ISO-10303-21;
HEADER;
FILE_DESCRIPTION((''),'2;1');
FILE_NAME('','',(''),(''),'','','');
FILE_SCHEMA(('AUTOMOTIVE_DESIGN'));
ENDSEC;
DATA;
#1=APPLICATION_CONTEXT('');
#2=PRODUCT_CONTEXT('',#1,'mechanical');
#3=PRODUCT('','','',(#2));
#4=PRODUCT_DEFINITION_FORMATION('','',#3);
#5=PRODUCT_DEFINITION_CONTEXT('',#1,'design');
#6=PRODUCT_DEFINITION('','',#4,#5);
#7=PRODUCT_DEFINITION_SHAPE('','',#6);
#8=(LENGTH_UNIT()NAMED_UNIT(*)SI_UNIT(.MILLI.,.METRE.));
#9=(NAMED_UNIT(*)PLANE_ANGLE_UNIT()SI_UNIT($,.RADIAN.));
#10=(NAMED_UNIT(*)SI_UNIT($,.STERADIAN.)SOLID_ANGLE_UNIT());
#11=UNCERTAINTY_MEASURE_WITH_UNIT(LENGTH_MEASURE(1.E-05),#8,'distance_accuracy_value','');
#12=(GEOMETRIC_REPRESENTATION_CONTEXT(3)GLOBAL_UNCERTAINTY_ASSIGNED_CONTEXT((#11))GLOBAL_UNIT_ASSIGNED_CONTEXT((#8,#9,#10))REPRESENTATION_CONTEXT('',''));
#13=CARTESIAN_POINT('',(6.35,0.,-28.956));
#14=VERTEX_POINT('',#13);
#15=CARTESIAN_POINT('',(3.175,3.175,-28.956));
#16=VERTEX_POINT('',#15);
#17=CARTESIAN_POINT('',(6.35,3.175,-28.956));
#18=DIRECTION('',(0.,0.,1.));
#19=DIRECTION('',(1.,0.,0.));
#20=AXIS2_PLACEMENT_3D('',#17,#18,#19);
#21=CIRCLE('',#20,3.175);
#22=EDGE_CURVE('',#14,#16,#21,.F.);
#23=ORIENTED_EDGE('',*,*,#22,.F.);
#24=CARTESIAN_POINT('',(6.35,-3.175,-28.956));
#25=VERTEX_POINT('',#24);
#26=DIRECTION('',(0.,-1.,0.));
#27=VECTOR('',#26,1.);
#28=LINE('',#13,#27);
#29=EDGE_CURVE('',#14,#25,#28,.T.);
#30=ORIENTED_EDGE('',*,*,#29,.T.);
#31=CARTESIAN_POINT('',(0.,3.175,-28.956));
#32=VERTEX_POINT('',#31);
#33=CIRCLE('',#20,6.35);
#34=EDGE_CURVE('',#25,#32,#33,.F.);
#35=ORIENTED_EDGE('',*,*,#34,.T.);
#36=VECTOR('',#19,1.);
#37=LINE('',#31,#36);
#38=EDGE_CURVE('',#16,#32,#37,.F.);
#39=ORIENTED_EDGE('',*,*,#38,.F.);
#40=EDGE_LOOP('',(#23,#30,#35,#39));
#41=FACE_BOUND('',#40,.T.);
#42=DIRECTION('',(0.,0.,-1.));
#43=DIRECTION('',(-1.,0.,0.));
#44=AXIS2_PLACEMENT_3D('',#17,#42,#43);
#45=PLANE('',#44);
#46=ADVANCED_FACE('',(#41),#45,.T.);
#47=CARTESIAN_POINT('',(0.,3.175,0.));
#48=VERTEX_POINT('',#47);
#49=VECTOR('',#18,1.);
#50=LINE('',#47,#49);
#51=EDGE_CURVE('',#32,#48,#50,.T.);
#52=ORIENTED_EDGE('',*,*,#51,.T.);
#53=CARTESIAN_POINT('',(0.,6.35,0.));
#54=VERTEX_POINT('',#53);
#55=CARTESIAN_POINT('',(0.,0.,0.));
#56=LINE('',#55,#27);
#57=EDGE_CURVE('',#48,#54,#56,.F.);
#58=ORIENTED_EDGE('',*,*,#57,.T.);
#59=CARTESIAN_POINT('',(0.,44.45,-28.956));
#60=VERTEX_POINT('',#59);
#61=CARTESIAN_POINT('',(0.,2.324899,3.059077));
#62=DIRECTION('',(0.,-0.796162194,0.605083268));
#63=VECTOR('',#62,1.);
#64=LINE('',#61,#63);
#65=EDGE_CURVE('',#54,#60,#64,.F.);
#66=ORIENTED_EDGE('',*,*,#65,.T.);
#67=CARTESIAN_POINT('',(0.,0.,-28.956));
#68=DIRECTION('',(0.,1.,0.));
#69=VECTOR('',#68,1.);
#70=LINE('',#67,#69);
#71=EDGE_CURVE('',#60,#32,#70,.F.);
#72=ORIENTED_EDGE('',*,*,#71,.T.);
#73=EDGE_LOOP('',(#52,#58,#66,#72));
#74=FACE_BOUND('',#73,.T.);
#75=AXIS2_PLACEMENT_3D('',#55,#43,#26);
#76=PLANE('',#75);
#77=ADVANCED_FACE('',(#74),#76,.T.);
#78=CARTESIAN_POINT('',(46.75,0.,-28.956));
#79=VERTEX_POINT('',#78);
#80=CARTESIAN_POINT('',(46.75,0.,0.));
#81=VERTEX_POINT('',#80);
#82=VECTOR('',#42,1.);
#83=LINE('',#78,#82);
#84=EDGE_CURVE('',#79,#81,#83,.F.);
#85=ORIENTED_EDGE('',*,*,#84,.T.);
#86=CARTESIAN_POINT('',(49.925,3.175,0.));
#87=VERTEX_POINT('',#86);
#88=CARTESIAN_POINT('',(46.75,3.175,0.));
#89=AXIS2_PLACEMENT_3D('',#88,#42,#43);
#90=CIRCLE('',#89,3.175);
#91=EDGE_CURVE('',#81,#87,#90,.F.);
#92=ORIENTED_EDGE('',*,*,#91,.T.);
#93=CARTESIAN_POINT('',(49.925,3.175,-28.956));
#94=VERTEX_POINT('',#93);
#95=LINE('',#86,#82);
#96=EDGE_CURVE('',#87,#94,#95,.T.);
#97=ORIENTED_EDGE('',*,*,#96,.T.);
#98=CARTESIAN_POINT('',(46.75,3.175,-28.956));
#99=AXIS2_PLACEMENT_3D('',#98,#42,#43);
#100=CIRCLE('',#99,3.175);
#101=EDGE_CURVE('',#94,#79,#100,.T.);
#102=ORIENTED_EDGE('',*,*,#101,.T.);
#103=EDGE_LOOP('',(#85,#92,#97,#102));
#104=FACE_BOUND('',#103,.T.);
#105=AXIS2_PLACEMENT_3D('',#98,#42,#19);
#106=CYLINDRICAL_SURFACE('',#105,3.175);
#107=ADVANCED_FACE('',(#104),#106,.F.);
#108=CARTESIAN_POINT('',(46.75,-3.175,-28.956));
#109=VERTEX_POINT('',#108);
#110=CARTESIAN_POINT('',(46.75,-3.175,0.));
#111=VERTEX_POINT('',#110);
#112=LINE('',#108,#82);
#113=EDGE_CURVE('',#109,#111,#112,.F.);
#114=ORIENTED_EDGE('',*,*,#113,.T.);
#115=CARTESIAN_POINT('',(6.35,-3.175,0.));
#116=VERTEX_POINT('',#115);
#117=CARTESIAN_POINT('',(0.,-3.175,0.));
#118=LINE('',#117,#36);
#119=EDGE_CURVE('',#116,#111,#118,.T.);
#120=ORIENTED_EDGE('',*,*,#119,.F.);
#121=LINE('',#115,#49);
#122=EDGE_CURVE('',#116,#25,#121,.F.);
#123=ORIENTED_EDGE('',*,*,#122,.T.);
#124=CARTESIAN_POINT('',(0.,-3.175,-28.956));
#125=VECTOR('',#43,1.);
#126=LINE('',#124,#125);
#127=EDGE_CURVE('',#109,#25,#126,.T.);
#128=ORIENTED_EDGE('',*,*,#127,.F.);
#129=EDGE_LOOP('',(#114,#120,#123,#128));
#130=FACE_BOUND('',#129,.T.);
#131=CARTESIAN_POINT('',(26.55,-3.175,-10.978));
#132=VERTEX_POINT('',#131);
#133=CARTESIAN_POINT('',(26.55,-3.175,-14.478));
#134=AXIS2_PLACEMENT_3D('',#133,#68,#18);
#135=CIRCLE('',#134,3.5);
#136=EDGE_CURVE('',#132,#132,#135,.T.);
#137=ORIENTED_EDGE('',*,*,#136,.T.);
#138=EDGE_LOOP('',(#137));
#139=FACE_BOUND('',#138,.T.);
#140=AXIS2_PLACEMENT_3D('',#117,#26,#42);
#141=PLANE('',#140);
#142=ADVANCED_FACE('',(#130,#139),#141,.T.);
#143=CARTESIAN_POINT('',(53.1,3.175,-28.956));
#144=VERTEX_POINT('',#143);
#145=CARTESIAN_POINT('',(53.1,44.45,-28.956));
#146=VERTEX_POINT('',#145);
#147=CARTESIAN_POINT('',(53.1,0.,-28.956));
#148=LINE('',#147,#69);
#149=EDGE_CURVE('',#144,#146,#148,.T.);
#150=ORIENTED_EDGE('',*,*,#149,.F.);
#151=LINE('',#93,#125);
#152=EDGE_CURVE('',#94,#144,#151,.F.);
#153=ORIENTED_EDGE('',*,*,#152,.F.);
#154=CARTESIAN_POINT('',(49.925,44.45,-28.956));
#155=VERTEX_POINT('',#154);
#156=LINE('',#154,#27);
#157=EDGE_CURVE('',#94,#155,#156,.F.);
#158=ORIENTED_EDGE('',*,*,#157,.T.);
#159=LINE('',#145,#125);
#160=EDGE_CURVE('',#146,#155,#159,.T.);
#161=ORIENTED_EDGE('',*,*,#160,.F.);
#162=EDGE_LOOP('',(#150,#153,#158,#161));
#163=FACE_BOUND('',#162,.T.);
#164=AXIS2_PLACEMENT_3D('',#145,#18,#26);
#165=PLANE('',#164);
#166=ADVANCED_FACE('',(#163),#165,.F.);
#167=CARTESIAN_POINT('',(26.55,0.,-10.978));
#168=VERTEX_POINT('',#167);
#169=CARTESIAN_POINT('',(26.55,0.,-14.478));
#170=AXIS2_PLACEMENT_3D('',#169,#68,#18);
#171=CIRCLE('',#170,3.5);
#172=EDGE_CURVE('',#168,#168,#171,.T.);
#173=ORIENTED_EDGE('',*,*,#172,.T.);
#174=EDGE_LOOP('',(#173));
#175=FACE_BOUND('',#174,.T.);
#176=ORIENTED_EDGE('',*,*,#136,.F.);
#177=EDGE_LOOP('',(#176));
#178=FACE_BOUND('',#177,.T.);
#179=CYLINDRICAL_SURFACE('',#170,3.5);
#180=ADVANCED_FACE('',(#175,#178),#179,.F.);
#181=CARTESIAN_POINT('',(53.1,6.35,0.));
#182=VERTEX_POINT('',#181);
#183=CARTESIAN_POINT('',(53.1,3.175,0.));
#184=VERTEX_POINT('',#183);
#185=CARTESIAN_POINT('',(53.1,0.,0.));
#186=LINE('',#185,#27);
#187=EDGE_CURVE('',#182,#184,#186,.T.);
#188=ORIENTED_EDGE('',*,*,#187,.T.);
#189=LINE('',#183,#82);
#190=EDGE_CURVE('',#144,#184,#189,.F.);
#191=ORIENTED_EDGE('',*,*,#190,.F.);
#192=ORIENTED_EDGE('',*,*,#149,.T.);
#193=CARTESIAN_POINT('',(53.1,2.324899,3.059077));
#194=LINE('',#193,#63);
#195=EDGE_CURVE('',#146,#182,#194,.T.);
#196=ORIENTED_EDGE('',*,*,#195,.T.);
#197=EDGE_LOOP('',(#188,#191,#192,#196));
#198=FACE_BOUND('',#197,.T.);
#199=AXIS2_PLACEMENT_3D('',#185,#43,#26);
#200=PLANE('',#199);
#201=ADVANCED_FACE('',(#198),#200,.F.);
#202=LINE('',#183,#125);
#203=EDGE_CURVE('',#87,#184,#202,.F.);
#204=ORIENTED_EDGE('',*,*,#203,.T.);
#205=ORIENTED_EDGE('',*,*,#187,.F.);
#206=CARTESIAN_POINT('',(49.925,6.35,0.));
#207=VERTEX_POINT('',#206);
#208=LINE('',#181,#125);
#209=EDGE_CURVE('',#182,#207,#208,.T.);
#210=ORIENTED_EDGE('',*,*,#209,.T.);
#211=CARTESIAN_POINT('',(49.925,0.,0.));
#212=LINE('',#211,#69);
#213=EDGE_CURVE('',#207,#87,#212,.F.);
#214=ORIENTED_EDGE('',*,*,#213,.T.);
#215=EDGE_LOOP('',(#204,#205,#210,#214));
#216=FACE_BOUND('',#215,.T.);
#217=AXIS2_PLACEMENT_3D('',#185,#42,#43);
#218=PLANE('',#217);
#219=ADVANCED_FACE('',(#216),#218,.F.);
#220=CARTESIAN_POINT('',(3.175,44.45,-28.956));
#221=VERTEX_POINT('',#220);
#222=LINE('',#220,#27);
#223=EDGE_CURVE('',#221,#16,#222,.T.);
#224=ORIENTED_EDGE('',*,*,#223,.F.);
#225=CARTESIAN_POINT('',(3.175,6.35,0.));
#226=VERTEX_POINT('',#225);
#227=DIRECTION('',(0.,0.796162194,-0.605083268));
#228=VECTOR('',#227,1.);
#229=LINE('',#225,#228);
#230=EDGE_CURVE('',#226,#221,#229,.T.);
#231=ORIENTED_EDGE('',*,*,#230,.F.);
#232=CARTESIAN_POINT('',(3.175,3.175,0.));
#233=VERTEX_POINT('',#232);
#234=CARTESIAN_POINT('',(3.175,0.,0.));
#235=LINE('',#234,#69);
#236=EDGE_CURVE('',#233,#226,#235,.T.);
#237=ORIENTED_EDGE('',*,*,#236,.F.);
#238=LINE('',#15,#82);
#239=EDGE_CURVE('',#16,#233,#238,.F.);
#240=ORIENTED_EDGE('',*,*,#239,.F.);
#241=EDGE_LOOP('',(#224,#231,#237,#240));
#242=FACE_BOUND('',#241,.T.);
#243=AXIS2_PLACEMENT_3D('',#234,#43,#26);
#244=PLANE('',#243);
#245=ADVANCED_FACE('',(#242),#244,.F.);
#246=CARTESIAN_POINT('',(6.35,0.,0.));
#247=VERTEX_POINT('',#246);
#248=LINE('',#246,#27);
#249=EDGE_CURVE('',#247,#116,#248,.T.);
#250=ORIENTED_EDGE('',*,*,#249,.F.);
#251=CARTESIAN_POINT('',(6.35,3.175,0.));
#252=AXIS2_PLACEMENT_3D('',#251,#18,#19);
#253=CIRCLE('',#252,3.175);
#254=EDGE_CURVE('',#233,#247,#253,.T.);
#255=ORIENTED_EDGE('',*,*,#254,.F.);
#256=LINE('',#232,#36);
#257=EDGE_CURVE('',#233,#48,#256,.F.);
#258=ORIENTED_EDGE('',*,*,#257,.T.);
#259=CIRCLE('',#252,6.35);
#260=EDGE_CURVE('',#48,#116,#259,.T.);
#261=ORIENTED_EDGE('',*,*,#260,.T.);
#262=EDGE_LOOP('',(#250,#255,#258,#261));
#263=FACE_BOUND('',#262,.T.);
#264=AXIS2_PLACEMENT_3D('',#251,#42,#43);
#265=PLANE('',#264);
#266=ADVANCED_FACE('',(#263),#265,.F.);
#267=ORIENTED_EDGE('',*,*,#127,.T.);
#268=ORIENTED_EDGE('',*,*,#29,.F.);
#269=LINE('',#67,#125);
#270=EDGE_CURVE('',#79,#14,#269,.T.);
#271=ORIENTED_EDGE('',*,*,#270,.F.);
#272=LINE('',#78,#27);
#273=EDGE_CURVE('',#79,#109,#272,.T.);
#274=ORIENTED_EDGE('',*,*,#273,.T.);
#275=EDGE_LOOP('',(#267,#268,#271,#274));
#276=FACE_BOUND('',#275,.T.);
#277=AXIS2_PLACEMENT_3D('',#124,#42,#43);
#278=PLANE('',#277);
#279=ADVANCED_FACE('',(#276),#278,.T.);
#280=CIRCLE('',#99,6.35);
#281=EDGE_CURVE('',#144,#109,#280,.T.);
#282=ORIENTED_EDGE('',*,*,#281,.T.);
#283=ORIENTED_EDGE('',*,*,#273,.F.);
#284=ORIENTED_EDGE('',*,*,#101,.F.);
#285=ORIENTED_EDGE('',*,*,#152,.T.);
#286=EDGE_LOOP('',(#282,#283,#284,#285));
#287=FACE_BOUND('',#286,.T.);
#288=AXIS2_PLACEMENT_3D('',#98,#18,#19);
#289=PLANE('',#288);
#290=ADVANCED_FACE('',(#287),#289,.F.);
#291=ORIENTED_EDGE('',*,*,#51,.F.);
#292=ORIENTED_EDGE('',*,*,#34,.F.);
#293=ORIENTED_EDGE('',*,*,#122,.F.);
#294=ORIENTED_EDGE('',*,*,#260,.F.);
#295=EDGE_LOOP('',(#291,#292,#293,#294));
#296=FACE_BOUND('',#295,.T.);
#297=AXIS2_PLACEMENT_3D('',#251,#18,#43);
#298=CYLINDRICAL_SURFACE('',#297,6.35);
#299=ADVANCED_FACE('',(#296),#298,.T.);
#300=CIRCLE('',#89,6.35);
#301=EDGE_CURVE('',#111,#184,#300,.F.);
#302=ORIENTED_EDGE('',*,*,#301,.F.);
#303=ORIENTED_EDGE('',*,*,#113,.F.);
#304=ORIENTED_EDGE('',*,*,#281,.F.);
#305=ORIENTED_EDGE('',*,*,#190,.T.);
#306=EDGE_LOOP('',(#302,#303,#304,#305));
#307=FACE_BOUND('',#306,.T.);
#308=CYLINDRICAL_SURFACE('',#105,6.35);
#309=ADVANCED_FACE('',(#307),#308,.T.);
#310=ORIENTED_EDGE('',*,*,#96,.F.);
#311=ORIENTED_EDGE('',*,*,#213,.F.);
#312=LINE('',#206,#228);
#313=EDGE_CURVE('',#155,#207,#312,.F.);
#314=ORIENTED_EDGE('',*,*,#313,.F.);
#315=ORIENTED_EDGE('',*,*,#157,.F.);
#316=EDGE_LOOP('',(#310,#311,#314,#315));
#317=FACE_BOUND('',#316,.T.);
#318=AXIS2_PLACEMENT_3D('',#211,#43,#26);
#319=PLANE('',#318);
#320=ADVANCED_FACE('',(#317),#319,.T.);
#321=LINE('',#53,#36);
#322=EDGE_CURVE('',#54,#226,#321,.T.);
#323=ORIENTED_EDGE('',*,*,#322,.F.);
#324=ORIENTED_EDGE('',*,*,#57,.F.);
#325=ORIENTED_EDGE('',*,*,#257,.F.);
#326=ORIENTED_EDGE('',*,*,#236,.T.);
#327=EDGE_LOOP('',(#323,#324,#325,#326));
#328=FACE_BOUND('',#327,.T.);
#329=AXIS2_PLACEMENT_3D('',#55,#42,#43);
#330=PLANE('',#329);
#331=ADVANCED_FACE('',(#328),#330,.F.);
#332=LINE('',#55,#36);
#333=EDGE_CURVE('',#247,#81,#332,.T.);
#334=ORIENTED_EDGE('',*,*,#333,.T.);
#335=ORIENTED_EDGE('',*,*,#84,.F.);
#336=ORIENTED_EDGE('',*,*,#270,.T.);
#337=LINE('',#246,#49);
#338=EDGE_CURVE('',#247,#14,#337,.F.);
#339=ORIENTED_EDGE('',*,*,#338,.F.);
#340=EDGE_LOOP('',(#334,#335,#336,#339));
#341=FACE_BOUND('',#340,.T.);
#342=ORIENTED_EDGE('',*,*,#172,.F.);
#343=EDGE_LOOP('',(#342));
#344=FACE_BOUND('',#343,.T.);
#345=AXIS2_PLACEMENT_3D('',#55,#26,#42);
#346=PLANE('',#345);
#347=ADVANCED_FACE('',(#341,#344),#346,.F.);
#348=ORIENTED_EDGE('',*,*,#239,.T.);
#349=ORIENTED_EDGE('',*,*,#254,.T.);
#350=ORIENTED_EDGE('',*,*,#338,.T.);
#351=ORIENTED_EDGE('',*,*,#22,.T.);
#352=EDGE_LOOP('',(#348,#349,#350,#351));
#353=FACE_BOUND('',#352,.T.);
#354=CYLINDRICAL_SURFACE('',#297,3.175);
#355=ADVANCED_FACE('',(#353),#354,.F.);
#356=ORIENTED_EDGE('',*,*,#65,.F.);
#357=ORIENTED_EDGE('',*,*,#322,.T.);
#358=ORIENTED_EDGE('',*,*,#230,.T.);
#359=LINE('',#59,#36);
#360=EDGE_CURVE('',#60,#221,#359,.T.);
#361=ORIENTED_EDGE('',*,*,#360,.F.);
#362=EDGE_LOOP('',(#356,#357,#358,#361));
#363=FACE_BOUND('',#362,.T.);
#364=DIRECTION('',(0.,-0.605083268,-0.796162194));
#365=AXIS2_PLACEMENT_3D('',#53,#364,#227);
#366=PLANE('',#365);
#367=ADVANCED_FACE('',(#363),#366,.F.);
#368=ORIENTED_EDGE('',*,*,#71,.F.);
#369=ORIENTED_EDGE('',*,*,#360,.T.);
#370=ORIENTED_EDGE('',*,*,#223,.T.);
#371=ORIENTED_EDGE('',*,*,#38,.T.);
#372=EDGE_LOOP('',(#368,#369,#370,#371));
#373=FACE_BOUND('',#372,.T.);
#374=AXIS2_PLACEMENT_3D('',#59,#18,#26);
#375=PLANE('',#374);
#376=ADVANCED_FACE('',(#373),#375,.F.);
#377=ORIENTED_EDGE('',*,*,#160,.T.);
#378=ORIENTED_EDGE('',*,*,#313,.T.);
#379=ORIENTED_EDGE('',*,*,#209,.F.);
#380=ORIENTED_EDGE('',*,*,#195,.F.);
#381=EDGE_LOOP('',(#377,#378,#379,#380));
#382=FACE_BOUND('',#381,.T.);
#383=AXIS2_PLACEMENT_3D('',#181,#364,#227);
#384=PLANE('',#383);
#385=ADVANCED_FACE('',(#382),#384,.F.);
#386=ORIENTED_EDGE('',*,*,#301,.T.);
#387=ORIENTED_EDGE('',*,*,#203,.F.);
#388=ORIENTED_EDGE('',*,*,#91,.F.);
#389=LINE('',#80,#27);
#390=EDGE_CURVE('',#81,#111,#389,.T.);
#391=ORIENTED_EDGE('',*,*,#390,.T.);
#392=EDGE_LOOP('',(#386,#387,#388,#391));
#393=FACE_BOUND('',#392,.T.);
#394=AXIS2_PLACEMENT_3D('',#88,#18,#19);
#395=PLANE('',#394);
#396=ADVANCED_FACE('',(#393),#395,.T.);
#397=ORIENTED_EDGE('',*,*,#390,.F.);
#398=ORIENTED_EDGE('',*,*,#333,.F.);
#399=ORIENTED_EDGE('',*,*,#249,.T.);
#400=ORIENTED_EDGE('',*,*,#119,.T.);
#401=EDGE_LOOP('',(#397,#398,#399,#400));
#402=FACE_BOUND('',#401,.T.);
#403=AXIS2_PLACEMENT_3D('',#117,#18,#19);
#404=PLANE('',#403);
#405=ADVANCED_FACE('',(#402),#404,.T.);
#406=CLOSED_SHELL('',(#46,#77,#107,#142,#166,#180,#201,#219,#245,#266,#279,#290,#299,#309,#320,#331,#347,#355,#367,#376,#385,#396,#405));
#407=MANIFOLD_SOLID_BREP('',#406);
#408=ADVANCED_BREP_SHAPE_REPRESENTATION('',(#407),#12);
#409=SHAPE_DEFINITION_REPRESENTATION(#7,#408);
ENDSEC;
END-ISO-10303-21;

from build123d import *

# Parameters (mm, degrees)
SKETCH3_W                      = 53.099999972
SKETCH3_H                      = 28.956
BASE_FLANGE1_DEPTH             = 3.175
EDGE_FLANGE4_STRIP_W           = 19.05
EDGE_FLANGE4_STRIP_H           = 3.175
EDGE_FLANGE4_STRIP_CUT_DEPTH   = 28.956
EDGE_FLANGE4_STRIP_2_W         = 19.05
EDGE_FLANGE4_STRIP_2_H         = 3.175
EDGE_FLANGE4_STRIP_CUT_2_DEPTH = 28.956
EDGE_FLANGE4_DEPTH             = 28.956
EDGE_FLANGE4_FLAT_DEPTH        = 3.175
EDGE_FLANGE4_BEND_DEPTH        = 28.956
EDGE_FLANGE4_FLAT_2_DEPTH      = 3.175
M6_CLEARANCE_HOLE1_D           = 7


# Sheet-metal steps are written as plain solids
with BuildPart() as part:
    # Sketch3 → Base-Flange1 (new body)
    with BuildSketch(Plane(origin=(0, 0, 0), x_dir=(1, 0, 0), z_dir=(0, 1, 0))):
        with Locations((26.549999986, 14.478)):
            Rectangle(SKETCH3_W, SKETCH3_H)
    extrude(amount=-BASE_FLANGE1_DEPTH)

    # Edge-Flange4 strip (across the edge) → Edge-Flange4 strip cut (cut)
    with BuildSketch(Plane(origin=(53.099999972, 0, 0), x_dir=(-1, 0, 0), z_dir=(0, 0, -1))):
        with Locations((-3.175, -1.5875)):
            Rectangle(EDGE_FLANGE4_STRIP_W, EDGE_FLANGE4_STRIP_H)
    extrude(amount=EDGE_FLANGE4_STRIP_CUT_DEPTH, mode=Mode.SUBTRACT)

    # Edge-Flange4 strip 2 (across the edge) → Edge-Flange4 strip cut 2 (cut)
    with BuildSketch(Plane.XY.offset(-28.956)):
        with Locations((-3.175, -1.5875)):
            Rectangle(EDGE_FLANGE4_STRIP_2_W, EDGE_FLANGE4_STRIP_2_H)
    extrude(amount=EDGE_FLANGE4_STRIP_CUT_2_DEPTH, mode=Mode.SUBTRACT)

    # Edge-Flange4 bend section (across the edge) → Edge-Flange4 (add)
    with BuildSketch(Plane(origin=(53.099999972, 0, 0), x_dir=(-1, 0, 0), z_dir=(0, 0, -1))):
        with BuildLine():
            Line((0, 3.175), (3.175, 3.175))
            ThreePointArc((3.175, 3.175), (4.10493597, 0.92993597), (6.35, 0))
            Line((6.35, 0), (6.35, -3.175))
            ThreePointArc((6.35, -3.175), (1.859871939, -1.315128061), (0, 3.175))
        make_face()
    extrude(amount=EDGE_FLANGE4_DEPTH)

    # Edge-Flange4 profile (on flange) → Edge-Flange4 flat (add)
    with BuildSketch(Plane(origin=(53.099999972, 0, 0), x_dir=(0, 0, -1), z_dir=(1, 0, 0))):
        Polygon((0, 6.35), (0, 3.175), (28.956, 3.175), (28.956, 44.45), align=None)
    extrude(amount=-EDGE_FLANGE4_FLAT_DEPTH)

    # Edge-Flange4 bend section 2 (across the edge) → Edge-Flange4 bend (add)
    with BuildSketch(Plane.XY.offset(-28.956)):
        with BuildLine():
            Line((0, 3.175), (3.175, 3.175))
            ThreePointArc((3.175, 3.175), (4.10493597, 0.92993597), (6.35, 0))
            Line((6.35, 0), (6.35, -3.175))
            ThreePointArc((6.35, -3.175), (1.859871939, -1.315128061), (0, 3.175))
        make_face()
    extrude(amount=EDGE_FLANGE4_BEND_DEPTH)

    # Edge-Flange4 profile 2 (on flange) → Edge-Flange4 flat 2 (add)
    with BuildSketch(Plane.ZY):
        Polygon((-28.956, 44.45), (-28.956, 3.175), (0, 3.175), (0, 6.35), align=None)
    extrude(amount=-EDGE_FLANGE4_FLAT_2_DEPTH)

    # M6 Clearance Hole1 (through all)
    with Locations(Plane(origin=(0, 0, 0), x_dir=(1, 0, 0), z_dir=(0, 1, 0))):
        with Locations((26.549999986, 14.478)):
            Hole(M6_CLEARANCE_HOLE1_D / 2)


solid = part.part
